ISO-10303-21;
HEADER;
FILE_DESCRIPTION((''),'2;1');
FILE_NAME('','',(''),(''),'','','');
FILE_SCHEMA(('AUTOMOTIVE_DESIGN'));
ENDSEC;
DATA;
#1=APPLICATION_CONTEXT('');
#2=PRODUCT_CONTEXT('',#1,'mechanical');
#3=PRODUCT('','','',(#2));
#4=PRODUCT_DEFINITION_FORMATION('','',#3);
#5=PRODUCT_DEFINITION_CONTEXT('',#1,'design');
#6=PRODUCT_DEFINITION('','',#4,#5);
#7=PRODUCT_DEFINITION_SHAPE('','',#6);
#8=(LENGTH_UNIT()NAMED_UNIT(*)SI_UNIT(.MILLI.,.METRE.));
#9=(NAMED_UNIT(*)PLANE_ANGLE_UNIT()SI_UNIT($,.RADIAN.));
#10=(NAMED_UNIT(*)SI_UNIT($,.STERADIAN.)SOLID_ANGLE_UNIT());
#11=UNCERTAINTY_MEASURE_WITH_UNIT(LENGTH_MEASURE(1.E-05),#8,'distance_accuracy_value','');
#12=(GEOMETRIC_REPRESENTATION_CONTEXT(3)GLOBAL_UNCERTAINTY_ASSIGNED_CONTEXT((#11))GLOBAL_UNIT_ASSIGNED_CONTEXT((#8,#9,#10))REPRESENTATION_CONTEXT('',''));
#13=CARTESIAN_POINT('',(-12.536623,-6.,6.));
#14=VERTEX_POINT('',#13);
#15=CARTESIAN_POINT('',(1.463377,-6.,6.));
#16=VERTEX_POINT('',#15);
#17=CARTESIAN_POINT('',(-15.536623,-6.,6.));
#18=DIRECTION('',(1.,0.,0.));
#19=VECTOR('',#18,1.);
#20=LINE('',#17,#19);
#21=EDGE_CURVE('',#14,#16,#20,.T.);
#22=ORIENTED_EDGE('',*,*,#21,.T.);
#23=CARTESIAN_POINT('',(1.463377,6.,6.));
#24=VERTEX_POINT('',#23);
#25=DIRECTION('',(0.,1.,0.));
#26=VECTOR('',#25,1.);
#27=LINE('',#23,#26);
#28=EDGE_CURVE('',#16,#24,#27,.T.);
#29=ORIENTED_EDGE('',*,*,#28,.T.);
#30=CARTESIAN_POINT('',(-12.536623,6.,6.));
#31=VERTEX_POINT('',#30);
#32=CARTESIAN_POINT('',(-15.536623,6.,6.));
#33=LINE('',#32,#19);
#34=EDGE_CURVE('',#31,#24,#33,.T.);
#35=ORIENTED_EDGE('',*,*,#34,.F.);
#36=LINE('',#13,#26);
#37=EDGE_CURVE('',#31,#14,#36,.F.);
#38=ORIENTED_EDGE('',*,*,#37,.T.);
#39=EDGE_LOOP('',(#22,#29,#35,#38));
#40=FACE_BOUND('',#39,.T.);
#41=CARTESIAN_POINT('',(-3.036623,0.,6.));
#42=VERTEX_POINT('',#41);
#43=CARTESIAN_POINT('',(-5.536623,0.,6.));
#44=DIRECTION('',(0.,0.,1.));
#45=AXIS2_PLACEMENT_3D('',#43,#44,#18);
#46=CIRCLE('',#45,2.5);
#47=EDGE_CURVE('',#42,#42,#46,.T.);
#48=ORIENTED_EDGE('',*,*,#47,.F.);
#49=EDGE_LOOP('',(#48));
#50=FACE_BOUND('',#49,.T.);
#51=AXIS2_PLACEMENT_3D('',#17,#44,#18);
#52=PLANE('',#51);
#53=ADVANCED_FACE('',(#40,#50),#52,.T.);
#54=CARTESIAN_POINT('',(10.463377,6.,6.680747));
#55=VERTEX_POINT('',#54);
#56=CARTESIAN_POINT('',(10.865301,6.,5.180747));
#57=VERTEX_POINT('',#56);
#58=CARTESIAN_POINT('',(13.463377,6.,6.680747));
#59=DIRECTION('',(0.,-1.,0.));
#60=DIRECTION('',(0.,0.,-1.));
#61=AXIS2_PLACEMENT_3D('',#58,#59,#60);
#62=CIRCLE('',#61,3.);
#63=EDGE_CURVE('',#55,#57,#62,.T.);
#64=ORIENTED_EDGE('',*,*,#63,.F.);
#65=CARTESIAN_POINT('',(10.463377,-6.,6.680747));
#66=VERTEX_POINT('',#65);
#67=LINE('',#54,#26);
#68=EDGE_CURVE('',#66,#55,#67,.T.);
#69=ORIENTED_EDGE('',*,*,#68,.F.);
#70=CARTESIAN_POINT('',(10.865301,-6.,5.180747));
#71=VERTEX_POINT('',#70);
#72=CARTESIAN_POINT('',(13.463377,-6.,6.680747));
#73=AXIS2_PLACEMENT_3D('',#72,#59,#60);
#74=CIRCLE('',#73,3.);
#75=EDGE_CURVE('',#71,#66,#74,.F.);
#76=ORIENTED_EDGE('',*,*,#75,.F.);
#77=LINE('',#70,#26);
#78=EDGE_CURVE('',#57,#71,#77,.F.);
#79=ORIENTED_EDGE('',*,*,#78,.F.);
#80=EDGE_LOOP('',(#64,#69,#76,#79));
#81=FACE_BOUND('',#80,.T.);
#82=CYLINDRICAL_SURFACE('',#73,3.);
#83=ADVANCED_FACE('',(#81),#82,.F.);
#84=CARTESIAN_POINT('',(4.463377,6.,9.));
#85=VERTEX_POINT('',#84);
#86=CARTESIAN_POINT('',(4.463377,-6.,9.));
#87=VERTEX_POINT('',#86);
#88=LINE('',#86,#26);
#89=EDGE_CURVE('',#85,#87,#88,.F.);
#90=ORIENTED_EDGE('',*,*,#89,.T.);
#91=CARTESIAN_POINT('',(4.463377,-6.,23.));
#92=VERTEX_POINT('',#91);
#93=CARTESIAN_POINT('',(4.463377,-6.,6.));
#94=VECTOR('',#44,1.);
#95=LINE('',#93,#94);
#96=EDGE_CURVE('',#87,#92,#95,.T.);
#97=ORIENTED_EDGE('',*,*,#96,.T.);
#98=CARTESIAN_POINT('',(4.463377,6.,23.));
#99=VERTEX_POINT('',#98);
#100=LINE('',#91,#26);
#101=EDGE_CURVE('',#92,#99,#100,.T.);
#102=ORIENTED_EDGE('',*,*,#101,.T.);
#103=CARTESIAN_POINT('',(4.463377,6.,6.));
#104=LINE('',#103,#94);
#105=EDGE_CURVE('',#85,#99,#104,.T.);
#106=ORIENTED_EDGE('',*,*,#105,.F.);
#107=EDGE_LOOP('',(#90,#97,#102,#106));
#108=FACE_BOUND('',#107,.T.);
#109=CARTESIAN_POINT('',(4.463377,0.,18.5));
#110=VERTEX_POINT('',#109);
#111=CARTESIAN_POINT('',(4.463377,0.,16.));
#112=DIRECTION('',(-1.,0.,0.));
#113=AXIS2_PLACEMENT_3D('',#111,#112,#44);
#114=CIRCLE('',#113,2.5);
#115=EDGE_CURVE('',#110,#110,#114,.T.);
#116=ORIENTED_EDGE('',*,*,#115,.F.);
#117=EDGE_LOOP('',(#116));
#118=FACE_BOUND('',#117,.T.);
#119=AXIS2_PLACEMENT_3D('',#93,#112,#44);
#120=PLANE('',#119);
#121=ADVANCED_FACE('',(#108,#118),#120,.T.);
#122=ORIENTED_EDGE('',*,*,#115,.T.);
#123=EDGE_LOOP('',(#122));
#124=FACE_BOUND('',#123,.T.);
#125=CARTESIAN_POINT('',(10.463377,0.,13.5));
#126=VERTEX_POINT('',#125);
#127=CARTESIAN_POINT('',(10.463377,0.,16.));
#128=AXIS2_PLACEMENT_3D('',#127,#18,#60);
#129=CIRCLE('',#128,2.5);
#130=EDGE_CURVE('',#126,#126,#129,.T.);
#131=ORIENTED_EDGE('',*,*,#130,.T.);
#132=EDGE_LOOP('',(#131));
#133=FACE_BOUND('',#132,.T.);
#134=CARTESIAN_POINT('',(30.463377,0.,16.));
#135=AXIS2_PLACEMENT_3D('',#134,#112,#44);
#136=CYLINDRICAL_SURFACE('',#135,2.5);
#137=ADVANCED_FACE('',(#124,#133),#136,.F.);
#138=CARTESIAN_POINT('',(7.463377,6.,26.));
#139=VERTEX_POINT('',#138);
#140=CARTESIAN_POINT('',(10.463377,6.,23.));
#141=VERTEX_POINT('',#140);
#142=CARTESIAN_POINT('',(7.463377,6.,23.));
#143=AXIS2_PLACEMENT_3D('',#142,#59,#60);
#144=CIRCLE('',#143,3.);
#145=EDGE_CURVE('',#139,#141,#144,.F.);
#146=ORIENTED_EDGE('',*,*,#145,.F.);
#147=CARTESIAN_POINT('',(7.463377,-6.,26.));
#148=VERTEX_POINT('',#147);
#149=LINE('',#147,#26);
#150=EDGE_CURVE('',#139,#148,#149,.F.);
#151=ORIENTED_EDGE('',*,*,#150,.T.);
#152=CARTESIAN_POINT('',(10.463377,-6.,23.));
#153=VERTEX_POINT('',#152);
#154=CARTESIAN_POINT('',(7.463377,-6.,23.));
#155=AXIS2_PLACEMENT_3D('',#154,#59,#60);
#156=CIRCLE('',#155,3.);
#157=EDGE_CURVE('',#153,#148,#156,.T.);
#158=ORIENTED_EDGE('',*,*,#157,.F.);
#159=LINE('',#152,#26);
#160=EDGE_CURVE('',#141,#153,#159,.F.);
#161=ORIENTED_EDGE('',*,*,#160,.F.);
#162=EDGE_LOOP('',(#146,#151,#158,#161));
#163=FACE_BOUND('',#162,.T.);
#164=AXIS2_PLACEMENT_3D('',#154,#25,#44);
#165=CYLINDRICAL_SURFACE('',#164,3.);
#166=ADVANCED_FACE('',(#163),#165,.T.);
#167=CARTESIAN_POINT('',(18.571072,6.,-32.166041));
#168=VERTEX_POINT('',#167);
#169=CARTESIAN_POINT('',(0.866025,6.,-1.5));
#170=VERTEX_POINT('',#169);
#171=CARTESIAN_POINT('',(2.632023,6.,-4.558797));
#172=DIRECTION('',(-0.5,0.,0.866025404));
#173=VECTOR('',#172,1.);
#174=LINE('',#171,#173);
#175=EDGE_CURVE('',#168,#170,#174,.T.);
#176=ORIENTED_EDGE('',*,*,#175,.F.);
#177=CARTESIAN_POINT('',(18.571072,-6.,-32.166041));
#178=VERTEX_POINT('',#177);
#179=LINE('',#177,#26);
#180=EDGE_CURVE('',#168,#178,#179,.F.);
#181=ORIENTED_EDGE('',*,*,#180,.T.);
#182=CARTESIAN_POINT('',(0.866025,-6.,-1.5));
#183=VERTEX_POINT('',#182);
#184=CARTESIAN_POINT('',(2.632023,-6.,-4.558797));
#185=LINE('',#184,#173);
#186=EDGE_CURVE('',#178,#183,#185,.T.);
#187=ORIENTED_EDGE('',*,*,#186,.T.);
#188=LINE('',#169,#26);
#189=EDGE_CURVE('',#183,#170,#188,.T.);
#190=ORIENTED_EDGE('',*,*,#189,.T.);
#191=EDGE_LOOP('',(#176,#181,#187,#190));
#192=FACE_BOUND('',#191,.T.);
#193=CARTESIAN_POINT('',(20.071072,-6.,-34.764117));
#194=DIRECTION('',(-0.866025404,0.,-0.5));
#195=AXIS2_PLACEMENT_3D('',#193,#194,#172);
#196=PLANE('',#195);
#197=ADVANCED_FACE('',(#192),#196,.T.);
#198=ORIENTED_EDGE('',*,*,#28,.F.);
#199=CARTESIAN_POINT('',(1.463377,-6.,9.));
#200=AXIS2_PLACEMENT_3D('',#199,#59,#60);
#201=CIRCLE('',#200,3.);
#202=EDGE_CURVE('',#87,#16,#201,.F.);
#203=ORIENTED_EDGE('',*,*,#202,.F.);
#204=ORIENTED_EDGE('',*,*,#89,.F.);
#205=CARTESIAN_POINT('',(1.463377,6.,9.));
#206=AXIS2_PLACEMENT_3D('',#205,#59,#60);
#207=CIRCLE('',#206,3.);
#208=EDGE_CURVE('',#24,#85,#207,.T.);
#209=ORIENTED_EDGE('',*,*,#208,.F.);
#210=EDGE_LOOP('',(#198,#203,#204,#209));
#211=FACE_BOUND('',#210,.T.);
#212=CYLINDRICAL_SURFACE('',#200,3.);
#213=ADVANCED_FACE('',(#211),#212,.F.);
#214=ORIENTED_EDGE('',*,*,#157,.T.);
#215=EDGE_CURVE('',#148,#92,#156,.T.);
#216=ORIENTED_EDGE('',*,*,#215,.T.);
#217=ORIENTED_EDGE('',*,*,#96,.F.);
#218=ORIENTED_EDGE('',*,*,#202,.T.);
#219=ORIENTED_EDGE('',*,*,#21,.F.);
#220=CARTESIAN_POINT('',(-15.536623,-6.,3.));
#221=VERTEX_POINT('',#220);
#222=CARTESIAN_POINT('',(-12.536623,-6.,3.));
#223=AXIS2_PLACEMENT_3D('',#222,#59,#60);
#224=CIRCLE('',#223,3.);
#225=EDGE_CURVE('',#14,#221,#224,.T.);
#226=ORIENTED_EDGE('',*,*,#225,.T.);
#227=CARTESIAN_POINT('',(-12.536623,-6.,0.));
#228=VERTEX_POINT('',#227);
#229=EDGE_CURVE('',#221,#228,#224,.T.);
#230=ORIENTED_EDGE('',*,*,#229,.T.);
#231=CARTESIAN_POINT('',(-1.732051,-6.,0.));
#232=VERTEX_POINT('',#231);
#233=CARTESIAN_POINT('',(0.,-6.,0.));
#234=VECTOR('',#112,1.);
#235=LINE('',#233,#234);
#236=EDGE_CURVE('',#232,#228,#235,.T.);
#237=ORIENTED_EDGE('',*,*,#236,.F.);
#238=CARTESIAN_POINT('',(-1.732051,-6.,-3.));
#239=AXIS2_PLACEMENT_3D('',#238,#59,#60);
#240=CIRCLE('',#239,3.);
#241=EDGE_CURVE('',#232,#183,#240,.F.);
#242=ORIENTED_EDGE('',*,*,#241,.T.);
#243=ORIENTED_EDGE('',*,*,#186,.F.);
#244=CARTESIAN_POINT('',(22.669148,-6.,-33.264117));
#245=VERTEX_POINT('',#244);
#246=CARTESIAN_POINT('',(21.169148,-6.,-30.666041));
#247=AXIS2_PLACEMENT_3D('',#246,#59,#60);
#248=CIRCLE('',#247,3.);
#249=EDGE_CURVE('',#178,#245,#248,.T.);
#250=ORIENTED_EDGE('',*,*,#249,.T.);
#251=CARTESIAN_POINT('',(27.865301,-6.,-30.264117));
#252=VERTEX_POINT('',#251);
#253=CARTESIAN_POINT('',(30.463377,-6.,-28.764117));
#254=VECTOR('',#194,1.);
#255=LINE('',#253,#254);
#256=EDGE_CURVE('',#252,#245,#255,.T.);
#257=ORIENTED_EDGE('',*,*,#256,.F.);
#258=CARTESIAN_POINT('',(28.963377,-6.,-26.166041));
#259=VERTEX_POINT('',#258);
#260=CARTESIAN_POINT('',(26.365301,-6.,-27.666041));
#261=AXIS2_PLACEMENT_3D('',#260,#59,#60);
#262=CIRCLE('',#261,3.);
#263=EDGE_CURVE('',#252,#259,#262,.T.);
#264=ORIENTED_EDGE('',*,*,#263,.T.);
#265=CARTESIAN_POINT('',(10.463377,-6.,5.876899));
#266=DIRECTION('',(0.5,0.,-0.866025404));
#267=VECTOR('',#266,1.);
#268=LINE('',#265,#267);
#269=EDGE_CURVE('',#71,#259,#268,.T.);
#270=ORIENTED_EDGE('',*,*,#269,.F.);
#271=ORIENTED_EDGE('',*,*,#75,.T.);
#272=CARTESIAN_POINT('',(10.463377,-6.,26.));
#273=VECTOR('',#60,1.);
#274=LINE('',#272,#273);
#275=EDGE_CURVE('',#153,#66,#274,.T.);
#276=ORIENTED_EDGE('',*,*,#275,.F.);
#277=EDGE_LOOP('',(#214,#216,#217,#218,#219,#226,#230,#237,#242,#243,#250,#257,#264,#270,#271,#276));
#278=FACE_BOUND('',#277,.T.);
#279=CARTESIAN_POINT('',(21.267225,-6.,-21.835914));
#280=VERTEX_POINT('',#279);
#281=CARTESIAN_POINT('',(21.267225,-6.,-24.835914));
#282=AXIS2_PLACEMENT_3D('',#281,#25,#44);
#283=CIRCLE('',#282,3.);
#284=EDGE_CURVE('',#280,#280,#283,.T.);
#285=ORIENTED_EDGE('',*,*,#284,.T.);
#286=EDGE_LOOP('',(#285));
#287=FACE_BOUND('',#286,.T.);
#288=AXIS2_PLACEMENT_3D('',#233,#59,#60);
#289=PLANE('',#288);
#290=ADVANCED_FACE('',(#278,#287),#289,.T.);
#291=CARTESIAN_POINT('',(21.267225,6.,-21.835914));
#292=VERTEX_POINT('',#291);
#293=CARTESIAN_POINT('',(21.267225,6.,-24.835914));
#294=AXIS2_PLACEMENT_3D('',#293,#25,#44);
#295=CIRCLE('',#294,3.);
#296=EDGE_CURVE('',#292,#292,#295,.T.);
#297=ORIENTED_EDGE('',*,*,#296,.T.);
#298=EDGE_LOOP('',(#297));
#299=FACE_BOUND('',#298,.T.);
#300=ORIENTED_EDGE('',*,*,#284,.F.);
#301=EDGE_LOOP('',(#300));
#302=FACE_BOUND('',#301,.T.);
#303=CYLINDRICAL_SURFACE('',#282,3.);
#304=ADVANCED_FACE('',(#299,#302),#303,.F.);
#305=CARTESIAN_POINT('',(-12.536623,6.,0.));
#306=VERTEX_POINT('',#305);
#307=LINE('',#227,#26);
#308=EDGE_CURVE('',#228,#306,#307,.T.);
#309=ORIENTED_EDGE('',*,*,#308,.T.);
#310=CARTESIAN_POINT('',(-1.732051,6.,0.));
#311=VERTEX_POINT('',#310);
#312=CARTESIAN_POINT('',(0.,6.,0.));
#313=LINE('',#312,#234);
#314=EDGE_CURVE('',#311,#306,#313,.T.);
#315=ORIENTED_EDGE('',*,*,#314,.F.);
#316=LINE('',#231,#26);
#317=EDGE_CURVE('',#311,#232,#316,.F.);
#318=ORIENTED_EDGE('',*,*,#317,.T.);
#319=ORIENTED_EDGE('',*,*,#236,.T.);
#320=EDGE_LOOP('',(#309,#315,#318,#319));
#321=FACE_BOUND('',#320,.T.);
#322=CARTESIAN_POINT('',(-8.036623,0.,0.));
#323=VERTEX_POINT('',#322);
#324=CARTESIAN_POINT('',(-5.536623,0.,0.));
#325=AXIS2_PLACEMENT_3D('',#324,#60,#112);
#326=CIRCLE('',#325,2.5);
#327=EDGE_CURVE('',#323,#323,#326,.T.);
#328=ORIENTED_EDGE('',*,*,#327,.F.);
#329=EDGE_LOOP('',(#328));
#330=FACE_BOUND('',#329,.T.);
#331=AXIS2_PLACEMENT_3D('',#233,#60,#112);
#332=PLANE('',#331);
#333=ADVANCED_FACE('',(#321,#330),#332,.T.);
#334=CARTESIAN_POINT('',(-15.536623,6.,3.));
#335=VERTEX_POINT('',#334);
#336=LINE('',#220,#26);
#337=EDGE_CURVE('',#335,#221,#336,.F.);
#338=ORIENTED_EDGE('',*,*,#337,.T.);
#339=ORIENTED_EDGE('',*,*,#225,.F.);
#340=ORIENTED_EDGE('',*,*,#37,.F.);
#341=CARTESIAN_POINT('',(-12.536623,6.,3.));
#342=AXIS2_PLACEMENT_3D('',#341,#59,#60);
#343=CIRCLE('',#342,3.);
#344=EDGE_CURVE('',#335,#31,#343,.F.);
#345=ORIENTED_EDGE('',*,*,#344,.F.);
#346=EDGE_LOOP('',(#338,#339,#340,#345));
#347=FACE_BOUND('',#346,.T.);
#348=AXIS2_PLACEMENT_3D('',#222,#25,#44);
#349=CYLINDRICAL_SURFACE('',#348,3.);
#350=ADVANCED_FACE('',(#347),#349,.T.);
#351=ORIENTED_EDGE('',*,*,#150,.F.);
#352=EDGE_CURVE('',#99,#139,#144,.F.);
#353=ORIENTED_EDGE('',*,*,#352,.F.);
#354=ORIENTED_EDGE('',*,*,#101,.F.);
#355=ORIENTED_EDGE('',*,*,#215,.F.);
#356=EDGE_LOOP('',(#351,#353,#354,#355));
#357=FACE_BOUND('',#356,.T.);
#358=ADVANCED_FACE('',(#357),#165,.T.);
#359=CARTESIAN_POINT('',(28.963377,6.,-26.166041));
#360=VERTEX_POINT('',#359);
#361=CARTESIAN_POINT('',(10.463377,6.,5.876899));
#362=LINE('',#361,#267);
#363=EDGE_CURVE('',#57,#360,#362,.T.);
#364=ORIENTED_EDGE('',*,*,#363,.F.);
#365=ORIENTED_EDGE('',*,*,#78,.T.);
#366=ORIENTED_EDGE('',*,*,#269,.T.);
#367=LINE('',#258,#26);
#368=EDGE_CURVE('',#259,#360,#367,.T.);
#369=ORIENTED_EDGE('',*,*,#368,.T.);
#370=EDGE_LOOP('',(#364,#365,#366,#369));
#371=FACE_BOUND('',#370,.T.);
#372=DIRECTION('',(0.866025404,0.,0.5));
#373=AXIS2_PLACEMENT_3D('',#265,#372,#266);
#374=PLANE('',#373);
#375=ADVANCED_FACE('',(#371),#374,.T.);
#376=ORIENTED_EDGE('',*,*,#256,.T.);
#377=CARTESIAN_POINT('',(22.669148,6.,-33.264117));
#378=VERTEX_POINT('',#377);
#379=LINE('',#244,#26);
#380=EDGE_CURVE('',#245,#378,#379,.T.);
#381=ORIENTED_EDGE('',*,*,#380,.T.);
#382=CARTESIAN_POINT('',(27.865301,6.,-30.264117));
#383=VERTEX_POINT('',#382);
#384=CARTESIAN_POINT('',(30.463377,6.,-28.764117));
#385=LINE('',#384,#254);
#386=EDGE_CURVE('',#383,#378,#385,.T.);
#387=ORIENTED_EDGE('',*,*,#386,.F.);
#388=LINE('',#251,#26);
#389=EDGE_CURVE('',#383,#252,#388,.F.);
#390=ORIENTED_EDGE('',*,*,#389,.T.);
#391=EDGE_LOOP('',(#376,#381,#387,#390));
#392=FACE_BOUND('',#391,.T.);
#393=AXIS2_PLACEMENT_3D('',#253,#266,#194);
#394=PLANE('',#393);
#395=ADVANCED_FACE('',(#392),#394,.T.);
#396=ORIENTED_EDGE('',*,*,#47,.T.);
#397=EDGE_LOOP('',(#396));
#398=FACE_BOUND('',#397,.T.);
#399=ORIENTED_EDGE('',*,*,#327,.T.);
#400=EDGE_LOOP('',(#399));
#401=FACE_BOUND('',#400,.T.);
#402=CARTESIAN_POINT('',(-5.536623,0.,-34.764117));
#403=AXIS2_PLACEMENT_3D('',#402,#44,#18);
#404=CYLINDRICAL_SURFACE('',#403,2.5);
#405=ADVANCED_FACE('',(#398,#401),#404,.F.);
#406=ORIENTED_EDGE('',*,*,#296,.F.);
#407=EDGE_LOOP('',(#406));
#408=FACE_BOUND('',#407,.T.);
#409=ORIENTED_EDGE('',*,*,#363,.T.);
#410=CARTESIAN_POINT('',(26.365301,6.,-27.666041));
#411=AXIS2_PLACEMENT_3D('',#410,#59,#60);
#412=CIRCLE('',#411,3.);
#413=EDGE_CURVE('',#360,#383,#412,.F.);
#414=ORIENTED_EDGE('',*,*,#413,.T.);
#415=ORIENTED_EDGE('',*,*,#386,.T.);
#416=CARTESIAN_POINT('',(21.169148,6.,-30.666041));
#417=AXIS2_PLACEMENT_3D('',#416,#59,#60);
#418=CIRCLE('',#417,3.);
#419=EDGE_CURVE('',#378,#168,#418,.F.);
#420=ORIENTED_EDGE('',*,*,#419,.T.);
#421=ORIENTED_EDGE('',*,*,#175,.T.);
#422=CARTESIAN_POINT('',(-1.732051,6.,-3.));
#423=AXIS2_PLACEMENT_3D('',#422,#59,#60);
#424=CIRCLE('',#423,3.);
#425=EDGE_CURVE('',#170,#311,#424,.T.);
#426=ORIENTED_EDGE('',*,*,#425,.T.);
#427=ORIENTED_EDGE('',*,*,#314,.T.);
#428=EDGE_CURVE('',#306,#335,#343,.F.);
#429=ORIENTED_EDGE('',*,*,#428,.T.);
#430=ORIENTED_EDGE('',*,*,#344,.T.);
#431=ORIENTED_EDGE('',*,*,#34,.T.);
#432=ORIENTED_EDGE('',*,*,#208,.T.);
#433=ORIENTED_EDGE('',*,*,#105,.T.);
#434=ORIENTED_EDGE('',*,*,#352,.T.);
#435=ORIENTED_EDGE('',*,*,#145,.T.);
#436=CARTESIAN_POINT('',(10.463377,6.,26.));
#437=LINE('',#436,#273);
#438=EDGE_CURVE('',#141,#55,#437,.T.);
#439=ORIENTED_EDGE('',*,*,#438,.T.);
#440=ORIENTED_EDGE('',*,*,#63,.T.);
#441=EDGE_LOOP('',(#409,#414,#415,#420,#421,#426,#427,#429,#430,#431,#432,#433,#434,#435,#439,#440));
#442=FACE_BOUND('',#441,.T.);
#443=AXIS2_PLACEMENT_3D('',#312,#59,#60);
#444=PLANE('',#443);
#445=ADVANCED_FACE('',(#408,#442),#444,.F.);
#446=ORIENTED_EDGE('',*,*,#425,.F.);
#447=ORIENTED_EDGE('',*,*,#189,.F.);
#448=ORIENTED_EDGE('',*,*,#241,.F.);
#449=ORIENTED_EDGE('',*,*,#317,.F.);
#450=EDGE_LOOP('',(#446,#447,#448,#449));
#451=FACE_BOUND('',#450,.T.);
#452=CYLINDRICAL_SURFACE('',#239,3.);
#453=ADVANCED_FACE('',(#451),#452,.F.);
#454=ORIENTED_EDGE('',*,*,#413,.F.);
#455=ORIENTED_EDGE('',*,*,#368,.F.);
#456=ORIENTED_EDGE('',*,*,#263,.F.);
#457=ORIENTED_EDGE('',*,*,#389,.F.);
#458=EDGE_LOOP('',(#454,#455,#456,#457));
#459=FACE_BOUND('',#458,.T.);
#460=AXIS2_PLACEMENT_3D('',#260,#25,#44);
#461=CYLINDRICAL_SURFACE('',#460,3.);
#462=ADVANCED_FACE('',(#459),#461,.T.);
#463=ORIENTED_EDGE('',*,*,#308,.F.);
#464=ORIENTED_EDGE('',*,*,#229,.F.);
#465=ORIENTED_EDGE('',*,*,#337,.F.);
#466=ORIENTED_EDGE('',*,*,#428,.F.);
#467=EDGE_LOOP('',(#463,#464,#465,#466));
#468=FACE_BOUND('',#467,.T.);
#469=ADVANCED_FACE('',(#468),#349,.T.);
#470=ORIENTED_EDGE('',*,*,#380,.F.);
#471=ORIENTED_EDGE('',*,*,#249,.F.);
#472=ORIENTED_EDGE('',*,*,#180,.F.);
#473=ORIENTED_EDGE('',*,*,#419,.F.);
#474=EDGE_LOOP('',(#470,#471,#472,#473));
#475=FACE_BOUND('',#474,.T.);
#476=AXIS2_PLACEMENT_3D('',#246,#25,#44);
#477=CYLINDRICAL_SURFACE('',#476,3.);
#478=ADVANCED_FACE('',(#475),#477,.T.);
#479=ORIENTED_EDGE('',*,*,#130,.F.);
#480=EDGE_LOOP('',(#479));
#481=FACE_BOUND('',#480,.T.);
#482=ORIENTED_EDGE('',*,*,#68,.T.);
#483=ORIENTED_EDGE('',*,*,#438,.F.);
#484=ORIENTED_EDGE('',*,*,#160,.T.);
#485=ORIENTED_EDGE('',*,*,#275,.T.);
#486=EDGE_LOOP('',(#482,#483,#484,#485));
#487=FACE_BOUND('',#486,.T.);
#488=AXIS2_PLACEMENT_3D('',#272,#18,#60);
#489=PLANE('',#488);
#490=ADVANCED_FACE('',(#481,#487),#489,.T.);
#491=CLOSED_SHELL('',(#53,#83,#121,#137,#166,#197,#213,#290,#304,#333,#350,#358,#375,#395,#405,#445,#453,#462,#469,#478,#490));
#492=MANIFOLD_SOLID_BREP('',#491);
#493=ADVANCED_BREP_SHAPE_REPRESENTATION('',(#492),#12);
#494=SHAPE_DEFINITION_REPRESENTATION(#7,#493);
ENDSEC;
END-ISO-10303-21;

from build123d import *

# Parameters (mm, degrees)
BOSS_EXTRUDE1_DEPTH      = 6
BOSS_EXTRUDE1_DEPTH_BACK = 6
SKETCH1_R                = 3
SKETCH2_R                = 2.5
CUT_EXTRUDE1_DEPTH       = 44.824009589
SKETCH3_R                = 2.5
CUT_EXTRUDE2_DEPTH       = 52.241882852
FILLET1_R                = 3


with BuildPart() as part:
    # Sketch1 → Boss-Extrude1 (new, two sides: drawn at the far end of the back side and taken through both)
    with BuildSketch(Plane(origin=(0, 0, 0), x_dir=(1, 0, 0), z_dir=(0, 1, 0)).offset(-BOSS_EXTRUDE1_DEPTH_BACK)):
        Polygon((0, 0), (-15.536622966, 0), (-15.536622966, -6), (4.463377034, -6), (4.463377034, -26), (10.463377034, -26), (10.463377034, -5.876899358), (30.463377034, 28.764116793), (20.071072189, 34.764116793), (2.632022894, 4.55879738), align=None)
        with Locations(Location((21.267224611, 24.835913563, 0), (0, 0, 270))):
            Circle(SKETCH1_R, mode=Mode.SUBTRACT)
    extrude(amount=BOSS_EXTRUDE1_DEPTH + BOSS_EXTRUDE1_DEPTH_BACK)

    # Sketch2 → Cut-Extrude1 (cut, through all)
    with BuildSketch(Plane.ZY.offset(-4.463377034)):
        with Locations((16, 0)):
            Circle(SKETCH2_R)
    extrude(amount=-CUT_EXTRUDE1_DEPTH, mode=Mode.SUBTRACT)

    # Sketch3 → Cut-Extrude2 (cut, through all)
    with BuildSketch(Plane.XY.offset(6)):
        with Locations((-5.536622966, 0)):
            Circle(SKETCH3_R)
    extrude(amount=-CUT_EXTRUDE2_DEPTH, mode=Mode.SUBTRACT)

    # Fillet1
    fillet1_edges = [part.edges().sort_by_distance(p)[0] for p in [
        (10.463377034, 0, 26),
        (4.463377034, 0, 26),
        (-15.536622966, 0, 6),
        (-15.536622966, 0, 0),
        (4.463377034, 0, 6),
        (10.463377034, 0, 5.876899358),
        (30.463377034, 0, -28.764116793),
        (20.071072189, 0, -34.764116793),
        (0, 0, 0),
    ]]
    fillet(fillet1_edges, radius=FILLET1_R - 0.0001)  # a hair under: the kernel refuses the full size


solid = part.part
